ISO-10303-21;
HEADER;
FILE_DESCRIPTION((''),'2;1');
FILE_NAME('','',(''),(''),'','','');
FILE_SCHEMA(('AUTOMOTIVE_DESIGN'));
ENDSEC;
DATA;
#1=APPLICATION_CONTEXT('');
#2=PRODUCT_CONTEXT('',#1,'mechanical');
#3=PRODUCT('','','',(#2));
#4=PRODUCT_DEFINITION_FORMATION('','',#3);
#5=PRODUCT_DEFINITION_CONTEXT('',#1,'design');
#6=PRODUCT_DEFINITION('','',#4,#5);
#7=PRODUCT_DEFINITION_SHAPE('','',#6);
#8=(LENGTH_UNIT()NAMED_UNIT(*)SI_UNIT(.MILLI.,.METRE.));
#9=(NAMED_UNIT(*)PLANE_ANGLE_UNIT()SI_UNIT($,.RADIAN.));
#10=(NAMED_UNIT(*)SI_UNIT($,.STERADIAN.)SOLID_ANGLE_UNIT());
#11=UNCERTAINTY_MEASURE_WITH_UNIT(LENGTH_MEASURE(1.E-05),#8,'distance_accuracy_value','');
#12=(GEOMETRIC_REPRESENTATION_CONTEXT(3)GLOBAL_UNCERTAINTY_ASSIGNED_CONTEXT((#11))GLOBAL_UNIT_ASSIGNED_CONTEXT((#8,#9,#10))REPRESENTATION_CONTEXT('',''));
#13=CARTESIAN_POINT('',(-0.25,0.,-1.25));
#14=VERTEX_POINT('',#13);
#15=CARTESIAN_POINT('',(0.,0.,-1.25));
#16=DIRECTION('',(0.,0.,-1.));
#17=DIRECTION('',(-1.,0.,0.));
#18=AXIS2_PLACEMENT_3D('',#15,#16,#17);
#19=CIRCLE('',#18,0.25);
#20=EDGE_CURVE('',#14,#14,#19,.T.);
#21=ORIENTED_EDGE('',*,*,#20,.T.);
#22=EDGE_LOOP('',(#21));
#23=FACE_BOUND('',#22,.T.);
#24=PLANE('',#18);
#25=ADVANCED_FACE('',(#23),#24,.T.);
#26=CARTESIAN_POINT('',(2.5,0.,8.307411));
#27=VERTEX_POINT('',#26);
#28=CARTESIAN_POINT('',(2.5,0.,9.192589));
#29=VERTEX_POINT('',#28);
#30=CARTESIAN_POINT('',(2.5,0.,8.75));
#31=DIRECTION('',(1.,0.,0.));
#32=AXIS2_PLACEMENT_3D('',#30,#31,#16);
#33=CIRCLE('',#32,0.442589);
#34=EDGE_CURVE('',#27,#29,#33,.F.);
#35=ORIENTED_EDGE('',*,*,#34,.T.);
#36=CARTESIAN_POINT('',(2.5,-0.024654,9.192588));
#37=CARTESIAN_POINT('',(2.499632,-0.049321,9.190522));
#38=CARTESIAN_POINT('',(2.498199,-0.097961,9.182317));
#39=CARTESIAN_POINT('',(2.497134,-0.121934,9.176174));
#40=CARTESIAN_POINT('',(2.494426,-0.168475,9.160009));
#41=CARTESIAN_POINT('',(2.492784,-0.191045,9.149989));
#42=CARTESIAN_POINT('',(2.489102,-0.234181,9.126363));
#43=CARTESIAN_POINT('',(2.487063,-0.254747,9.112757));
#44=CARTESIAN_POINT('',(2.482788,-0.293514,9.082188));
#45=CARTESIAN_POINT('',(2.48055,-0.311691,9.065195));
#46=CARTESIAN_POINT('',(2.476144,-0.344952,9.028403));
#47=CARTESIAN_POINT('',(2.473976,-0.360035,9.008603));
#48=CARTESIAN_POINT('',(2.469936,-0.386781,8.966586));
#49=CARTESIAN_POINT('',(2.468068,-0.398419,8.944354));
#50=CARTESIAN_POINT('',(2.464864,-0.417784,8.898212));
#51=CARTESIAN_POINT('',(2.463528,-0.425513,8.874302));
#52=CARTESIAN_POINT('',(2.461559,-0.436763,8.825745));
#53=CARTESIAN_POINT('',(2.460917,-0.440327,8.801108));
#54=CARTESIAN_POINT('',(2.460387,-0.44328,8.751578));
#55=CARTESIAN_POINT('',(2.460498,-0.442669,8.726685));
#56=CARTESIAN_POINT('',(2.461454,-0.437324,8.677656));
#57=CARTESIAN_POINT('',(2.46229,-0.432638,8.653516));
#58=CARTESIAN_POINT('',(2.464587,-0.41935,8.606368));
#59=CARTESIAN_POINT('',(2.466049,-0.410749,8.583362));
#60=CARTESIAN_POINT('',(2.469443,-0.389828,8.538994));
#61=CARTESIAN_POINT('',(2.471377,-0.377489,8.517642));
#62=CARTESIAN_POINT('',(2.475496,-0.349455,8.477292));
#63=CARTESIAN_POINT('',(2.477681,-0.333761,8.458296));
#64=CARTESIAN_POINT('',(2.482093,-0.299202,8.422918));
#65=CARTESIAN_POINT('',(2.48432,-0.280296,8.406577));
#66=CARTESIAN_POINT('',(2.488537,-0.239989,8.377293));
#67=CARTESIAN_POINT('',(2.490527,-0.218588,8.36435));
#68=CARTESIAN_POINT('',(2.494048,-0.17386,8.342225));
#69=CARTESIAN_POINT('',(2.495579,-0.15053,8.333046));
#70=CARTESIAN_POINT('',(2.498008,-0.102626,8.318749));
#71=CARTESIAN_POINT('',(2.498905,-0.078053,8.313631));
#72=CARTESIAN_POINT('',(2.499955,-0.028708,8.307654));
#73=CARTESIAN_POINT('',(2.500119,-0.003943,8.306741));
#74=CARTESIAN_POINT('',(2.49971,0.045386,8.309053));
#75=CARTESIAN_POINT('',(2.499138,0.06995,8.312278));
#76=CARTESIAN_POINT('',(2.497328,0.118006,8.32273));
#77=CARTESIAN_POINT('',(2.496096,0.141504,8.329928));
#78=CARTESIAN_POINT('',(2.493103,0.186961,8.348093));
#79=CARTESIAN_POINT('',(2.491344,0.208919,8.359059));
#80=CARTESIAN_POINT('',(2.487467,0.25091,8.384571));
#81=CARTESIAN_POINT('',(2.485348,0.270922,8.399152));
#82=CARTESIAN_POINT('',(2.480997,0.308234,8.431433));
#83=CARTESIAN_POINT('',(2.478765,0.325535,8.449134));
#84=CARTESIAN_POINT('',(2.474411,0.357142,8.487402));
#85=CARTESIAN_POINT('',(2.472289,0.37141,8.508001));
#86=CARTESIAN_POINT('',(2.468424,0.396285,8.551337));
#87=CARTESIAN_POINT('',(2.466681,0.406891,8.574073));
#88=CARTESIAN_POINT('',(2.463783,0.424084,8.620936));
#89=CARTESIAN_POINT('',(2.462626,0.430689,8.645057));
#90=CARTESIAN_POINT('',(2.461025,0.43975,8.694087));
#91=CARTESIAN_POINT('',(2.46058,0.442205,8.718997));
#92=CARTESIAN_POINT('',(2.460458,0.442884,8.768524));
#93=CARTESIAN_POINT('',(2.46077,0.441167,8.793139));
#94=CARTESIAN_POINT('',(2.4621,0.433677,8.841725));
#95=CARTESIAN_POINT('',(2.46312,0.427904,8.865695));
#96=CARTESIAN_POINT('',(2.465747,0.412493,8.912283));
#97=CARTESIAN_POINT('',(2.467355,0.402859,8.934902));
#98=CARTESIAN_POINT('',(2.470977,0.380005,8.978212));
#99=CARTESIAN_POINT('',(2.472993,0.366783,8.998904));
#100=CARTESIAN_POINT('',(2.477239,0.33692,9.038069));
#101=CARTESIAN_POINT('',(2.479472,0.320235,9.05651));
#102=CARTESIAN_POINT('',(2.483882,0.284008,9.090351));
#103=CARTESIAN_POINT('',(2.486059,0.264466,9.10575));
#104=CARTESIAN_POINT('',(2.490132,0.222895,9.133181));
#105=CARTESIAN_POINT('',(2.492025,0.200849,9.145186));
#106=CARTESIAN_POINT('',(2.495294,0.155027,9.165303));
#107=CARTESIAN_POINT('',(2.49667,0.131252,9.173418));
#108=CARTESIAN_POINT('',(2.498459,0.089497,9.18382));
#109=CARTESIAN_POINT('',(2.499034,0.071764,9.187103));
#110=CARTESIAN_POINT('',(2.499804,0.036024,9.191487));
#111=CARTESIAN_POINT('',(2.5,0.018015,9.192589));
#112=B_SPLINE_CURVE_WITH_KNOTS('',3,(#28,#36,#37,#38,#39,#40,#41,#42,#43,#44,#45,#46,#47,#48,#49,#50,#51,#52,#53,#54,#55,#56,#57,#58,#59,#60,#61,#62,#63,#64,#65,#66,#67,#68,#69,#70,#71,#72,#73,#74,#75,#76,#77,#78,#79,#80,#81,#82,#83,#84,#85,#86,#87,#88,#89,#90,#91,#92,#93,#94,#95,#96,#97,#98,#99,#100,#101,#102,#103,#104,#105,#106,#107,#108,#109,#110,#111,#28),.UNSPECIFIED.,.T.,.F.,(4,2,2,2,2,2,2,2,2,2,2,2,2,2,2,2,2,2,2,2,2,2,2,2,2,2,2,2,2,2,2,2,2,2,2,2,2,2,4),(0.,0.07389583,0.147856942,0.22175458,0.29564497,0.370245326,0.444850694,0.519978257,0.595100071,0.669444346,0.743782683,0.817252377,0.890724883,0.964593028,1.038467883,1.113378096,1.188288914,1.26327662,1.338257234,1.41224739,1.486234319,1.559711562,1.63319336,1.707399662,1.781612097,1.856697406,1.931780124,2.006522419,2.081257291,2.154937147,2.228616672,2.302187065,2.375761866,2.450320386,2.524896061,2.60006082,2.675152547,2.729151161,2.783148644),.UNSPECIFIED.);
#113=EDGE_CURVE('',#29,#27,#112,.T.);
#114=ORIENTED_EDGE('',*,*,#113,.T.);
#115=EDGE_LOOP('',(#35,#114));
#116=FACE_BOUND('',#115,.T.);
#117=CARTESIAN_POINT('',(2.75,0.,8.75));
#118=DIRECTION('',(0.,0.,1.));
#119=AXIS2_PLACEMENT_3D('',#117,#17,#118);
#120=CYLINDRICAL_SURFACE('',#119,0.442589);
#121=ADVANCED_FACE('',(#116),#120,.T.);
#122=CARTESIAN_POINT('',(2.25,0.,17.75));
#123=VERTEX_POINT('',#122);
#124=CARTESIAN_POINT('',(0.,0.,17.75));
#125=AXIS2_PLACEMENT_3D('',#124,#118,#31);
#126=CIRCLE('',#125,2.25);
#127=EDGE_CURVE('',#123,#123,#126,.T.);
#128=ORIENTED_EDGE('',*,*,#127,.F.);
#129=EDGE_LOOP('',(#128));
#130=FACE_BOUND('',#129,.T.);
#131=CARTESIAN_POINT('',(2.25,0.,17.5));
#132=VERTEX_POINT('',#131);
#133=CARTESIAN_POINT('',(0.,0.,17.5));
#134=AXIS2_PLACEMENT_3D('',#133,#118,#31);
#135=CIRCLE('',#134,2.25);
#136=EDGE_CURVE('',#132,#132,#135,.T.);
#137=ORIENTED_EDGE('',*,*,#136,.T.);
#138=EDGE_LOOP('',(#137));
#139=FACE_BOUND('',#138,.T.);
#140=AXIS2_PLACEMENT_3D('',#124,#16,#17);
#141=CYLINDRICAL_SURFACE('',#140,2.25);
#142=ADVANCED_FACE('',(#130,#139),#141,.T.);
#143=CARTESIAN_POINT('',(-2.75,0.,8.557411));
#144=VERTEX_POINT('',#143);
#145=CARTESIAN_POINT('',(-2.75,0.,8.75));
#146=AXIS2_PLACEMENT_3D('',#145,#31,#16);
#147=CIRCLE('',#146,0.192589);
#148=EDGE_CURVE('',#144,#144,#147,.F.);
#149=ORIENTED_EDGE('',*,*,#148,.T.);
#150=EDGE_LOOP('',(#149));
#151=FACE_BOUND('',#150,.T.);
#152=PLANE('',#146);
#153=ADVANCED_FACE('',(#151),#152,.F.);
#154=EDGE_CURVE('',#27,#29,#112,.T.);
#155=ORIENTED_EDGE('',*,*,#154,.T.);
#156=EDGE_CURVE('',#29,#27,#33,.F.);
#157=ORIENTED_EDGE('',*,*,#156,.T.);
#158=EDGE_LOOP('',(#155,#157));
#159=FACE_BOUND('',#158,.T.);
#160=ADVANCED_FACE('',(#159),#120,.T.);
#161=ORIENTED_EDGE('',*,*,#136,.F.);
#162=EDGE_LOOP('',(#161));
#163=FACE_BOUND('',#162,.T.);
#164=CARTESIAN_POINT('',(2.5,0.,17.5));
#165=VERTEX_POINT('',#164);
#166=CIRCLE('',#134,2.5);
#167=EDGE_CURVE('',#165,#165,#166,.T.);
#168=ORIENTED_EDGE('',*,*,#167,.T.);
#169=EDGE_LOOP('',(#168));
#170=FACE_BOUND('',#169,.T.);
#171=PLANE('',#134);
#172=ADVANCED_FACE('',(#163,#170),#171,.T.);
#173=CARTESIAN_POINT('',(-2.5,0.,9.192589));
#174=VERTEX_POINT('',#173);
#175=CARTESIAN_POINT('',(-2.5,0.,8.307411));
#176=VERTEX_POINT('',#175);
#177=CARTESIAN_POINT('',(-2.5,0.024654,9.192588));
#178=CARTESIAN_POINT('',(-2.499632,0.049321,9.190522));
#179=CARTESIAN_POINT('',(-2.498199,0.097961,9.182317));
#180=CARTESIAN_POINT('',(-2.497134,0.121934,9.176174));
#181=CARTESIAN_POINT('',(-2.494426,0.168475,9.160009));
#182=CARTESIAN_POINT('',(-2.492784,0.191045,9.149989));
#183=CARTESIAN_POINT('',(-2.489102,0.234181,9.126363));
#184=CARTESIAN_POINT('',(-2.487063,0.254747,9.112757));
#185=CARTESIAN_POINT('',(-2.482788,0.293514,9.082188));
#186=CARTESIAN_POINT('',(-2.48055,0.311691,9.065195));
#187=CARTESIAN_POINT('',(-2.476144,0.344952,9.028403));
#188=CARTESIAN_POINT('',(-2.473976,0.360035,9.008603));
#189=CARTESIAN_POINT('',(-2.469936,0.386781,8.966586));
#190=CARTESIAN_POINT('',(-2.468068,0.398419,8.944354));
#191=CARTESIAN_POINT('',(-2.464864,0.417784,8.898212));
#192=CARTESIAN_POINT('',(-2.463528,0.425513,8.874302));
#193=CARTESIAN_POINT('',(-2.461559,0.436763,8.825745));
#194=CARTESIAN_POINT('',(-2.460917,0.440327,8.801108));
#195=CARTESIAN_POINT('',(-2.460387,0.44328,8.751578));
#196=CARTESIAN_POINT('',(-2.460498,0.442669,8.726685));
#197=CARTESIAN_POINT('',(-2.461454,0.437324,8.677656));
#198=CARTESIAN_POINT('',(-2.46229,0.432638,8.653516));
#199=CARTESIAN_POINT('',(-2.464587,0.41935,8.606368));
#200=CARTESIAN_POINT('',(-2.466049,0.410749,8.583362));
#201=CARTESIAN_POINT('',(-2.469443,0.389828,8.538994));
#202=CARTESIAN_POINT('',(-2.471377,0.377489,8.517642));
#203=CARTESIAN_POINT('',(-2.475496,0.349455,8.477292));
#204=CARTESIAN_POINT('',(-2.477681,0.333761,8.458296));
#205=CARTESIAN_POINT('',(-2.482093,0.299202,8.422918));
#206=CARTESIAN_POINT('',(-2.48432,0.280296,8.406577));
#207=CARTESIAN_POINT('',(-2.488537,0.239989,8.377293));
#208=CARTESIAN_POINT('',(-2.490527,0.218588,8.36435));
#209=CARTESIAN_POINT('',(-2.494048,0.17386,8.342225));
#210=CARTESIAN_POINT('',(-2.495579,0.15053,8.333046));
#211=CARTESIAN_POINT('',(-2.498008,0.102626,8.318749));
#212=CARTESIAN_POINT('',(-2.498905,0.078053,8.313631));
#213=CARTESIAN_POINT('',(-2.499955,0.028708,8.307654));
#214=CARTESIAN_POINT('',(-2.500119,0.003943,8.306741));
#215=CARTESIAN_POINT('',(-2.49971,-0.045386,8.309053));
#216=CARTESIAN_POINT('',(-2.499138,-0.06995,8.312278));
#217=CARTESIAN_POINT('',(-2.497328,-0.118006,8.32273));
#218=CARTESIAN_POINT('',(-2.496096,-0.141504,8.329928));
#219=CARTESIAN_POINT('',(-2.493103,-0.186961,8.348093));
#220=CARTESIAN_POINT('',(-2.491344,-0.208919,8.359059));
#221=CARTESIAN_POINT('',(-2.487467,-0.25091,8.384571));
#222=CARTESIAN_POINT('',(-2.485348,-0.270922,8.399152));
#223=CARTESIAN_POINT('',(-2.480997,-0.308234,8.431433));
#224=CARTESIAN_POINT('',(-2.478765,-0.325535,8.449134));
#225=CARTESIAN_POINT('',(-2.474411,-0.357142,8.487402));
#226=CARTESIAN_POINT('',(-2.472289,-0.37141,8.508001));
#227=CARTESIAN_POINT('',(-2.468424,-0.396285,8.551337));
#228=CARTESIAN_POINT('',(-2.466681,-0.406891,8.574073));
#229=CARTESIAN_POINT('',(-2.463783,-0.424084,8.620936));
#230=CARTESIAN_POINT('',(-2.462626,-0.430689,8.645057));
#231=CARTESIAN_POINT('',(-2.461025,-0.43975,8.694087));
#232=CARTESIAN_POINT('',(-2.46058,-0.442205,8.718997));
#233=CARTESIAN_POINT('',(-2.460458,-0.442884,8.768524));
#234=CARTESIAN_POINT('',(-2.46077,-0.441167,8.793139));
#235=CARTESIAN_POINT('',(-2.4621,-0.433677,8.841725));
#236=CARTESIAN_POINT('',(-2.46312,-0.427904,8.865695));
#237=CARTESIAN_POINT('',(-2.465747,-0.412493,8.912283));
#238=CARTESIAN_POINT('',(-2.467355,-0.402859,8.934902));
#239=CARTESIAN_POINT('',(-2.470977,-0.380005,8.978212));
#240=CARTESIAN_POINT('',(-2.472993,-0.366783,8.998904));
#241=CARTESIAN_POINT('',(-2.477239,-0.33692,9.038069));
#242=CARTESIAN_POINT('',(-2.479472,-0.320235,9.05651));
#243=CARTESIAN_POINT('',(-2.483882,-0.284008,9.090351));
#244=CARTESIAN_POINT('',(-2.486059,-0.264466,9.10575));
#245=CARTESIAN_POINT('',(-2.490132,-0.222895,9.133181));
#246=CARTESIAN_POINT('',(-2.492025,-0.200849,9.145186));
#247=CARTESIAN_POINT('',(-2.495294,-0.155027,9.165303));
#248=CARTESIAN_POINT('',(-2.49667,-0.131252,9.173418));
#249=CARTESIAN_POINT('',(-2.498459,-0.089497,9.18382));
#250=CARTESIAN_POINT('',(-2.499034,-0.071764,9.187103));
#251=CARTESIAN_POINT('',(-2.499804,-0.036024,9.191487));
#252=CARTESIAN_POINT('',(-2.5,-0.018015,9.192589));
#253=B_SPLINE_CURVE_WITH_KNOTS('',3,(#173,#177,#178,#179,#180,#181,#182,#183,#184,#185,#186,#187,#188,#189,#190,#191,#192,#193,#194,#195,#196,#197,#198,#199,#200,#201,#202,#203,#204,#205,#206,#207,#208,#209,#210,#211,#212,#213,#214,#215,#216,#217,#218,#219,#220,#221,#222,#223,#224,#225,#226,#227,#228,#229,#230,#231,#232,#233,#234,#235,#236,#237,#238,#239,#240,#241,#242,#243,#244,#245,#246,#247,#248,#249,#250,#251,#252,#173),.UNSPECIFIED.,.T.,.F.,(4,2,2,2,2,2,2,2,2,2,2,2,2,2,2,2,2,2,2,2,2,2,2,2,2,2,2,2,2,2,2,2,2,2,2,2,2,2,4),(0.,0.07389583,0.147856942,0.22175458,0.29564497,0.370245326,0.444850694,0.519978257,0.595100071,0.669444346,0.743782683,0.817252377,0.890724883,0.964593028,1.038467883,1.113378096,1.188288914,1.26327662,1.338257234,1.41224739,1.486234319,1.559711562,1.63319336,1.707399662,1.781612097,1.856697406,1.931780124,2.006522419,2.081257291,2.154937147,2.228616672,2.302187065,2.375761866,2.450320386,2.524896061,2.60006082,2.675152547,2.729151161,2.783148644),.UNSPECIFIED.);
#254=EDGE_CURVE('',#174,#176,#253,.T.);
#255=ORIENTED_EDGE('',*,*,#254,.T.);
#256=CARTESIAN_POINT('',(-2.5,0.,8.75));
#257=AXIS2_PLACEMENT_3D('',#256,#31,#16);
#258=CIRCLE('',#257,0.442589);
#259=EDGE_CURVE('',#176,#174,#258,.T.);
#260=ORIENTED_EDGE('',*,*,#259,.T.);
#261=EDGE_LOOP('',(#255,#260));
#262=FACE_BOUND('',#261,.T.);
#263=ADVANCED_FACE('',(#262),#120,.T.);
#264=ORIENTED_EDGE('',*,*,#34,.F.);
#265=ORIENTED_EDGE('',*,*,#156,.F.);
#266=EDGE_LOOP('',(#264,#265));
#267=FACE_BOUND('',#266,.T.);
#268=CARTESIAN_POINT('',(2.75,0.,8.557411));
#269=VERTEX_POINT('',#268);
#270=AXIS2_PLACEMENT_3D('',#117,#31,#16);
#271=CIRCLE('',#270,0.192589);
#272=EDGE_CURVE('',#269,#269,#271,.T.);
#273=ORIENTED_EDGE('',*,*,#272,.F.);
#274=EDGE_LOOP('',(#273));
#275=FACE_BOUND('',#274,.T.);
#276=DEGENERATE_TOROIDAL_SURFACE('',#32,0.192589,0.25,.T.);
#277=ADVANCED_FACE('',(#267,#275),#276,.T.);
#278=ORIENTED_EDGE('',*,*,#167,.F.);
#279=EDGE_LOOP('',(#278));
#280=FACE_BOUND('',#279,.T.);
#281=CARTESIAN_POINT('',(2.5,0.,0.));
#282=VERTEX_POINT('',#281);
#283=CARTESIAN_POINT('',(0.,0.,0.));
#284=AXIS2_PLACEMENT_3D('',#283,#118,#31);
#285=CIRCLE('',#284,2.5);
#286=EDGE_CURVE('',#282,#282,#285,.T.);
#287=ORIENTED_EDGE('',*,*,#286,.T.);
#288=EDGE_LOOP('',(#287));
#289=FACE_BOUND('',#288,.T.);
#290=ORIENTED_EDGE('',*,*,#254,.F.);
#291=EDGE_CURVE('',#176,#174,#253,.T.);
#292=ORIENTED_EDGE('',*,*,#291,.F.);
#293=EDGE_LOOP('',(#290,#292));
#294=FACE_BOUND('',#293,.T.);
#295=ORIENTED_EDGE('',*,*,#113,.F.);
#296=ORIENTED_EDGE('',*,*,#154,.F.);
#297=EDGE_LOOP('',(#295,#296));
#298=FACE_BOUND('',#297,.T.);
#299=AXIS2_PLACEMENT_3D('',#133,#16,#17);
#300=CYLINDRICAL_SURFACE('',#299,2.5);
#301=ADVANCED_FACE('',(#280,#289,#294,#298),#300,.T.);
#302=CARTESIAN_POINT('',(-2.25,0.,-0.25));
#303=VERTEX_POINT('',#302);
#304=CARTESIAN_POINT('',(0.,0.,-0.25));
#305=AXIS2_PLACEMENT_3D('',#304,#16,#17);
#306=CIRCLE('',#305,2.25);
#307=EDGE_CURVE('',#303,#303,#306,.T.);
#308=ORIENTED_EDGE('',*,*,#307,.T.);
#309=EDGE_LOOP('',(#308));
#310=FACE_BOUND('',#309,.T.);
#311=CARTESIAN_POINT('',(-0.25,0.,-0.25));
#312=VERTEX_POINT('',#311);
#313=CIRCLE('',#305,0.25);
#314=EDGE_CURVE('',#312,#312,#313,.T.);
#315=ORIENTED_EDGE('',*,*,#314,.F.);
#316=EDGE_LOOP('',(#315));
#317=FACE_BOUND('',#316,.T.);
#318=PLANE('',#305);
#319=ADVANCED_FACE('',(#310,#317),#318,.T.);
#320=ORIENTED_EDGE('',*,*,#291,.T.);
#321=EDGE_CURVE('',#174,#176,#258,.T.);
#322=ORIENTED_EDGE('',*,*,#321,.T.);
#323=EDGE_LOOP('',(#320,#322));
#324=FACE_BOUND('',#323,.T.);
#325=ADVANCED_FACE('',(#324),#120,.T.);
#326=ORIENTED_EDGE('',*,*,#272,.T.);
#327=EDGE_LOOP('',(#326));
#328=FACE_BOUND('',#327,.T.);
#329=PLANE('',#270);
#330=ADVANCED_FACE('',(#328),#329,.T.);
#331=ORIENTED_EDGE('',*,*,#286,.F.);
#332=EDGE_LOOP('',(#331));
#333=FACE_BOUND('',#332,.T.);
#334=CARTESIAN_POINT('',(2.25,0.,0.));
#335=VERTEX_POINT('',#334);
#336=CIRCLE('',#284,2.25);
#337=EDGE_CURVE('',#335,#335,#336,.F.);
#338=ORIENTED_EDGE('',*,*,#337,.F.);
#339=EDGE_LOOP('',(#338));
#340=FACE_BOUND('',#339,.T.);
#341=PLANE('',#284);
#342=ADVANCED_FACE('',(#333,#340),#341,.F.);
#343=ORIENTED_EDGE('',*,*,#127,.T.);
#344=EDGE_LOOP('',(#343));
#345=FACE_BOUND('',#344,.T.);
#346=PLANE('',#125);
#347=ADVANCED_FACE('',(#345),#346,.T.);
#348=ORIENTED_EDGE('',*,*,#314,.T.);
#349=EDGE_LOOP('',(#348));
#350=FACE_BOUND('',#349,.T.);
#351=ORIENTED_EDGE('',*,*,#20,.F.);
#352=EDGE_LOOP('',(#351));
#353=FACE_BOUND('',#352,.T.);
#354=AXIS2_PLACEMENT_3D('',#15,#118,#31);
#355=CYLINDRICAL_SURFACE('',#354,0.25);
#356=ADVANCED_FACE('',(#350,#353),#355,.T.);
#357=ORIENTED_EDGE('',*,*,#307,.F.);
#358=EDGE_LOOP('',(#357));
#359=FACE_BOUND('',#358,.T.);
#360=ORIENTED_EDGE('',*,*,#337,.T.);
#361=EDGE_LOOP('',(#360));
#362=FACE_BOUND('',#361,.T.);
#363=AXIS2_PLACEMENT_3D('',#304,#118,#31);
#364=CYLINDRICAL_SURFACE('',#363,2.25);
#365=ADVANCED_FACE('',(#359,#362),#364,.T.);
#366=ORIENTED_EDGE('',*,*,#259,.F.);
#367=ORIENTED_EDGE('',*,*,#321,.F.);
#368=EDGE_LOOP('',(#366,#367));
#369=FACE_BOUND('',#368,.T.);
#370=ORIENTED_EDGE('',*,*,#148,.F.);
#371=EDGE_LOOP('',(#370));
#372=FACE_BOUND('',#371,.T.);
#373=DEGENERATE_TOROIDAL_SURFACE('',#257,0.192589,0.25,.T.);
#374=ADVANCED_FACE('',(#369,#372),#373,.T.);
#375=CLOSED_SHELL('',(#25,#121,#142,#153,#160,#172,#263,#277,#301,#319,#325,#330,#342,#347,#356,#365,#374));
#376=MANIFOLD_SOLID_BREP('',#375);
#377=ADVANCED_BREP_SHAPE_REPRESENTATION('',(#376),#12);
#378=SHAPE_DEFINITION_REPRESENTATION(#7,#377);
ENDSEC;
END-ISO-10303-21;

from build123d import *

# Parameters (mm, degrees)
SKETCH1_R                = 2.5
BOSS_EXTRUDE1_DEPTH      = 17.5
SKETCH2_R                = 2.25
BOSS_EXTRUDE2_DEPTH      = 0.25
BOSS_EXTRUDE3_START      = 0.25
SKETCH3_R                = 2.25
BOSS_EXTRUDE3_DEPTH      = 0.25
SKETCH4_R                = 0.25
BOSS_EXTRUDE4_DEPTH      = 1
BOSS_EXTRUDE5_DEPTH      = 2.75
BOSS_EXTRUDE5_DEPTH_BACK = 2.75
SKETCH5_R                = 0.442588638
FILLET1_R                = 0.25


with BuildPart() as part:
    # Sketch1 → Boss-Extrude1 (new body)
    with BuildSketch(Plane.XY):
        Circle(SKETCH1_R)
    extrude(amount=BOSS_EXTRUDE1_DEPTH)

    # Sketch2 → Boss-Extrude2 (add)
    with BuildSketch(Plane.XY.offset(17.5)):
        Circle(SKETCH2_R)
    extrude(amount=BOSS_EXTRUDE2_DEPTH)

    # Sketch3 → Boss-Extrude3 (add)
    with BuildSketch(Plane(origin=(0, 0, 0), x_dir=(-1, 0, 0), z_dir=(0, 0, -1)).offset(BOSS_EXTRUDE3_START)):
        with Locations(Location((0, 0, 0), (0, 0, 180))):
            Circle(SKETCH3_R)
    extrude(amount=-BOSS_EXTRUDE3_DEPTH)

    # Sketch4 → Boss-Extrude4 (add)
    with BuildSketch(Plane(origin=(0, 0, -0.25), x_dir=(-1, 0, 0), z_dir=(0, 0, -1))):
        Circle(SKETCH4_R)
    extrude(amount=BOSS_EXTRUDE4_DEPTH)

    # Sketch5 → Boss-Extrude5 (add, two sides: drawn at the far end of the back side and taken through both)
    with BuildSketch(Plane(origin=(0, 0, 0), x_dir=(0, 0, -1), z_dir=(1, 0, 0)).offset(-BOSS_EXTRUDE5_DEPTH_BACK)):
        with Locations((-8.75, 0)):
            Circle(SKETCH5_R)
    extrude(amount=BOSS_EXTRUDE5_DEPTH + BOSS_EXTRUDE5_DEPTH_BACK)

    # Fillet1
    fillet1_edges = [part.edges().sort_by_distance(p)[0] for p in [
        (-2.75, 0, 9.192588638),
        (2.75, 0, 9.192588638),
    ]]
    fillet(fillet1_edges, radius=FILLET1_R - 0.0001)  # a hair under: the kernel refuses the full size


solid = part.part
